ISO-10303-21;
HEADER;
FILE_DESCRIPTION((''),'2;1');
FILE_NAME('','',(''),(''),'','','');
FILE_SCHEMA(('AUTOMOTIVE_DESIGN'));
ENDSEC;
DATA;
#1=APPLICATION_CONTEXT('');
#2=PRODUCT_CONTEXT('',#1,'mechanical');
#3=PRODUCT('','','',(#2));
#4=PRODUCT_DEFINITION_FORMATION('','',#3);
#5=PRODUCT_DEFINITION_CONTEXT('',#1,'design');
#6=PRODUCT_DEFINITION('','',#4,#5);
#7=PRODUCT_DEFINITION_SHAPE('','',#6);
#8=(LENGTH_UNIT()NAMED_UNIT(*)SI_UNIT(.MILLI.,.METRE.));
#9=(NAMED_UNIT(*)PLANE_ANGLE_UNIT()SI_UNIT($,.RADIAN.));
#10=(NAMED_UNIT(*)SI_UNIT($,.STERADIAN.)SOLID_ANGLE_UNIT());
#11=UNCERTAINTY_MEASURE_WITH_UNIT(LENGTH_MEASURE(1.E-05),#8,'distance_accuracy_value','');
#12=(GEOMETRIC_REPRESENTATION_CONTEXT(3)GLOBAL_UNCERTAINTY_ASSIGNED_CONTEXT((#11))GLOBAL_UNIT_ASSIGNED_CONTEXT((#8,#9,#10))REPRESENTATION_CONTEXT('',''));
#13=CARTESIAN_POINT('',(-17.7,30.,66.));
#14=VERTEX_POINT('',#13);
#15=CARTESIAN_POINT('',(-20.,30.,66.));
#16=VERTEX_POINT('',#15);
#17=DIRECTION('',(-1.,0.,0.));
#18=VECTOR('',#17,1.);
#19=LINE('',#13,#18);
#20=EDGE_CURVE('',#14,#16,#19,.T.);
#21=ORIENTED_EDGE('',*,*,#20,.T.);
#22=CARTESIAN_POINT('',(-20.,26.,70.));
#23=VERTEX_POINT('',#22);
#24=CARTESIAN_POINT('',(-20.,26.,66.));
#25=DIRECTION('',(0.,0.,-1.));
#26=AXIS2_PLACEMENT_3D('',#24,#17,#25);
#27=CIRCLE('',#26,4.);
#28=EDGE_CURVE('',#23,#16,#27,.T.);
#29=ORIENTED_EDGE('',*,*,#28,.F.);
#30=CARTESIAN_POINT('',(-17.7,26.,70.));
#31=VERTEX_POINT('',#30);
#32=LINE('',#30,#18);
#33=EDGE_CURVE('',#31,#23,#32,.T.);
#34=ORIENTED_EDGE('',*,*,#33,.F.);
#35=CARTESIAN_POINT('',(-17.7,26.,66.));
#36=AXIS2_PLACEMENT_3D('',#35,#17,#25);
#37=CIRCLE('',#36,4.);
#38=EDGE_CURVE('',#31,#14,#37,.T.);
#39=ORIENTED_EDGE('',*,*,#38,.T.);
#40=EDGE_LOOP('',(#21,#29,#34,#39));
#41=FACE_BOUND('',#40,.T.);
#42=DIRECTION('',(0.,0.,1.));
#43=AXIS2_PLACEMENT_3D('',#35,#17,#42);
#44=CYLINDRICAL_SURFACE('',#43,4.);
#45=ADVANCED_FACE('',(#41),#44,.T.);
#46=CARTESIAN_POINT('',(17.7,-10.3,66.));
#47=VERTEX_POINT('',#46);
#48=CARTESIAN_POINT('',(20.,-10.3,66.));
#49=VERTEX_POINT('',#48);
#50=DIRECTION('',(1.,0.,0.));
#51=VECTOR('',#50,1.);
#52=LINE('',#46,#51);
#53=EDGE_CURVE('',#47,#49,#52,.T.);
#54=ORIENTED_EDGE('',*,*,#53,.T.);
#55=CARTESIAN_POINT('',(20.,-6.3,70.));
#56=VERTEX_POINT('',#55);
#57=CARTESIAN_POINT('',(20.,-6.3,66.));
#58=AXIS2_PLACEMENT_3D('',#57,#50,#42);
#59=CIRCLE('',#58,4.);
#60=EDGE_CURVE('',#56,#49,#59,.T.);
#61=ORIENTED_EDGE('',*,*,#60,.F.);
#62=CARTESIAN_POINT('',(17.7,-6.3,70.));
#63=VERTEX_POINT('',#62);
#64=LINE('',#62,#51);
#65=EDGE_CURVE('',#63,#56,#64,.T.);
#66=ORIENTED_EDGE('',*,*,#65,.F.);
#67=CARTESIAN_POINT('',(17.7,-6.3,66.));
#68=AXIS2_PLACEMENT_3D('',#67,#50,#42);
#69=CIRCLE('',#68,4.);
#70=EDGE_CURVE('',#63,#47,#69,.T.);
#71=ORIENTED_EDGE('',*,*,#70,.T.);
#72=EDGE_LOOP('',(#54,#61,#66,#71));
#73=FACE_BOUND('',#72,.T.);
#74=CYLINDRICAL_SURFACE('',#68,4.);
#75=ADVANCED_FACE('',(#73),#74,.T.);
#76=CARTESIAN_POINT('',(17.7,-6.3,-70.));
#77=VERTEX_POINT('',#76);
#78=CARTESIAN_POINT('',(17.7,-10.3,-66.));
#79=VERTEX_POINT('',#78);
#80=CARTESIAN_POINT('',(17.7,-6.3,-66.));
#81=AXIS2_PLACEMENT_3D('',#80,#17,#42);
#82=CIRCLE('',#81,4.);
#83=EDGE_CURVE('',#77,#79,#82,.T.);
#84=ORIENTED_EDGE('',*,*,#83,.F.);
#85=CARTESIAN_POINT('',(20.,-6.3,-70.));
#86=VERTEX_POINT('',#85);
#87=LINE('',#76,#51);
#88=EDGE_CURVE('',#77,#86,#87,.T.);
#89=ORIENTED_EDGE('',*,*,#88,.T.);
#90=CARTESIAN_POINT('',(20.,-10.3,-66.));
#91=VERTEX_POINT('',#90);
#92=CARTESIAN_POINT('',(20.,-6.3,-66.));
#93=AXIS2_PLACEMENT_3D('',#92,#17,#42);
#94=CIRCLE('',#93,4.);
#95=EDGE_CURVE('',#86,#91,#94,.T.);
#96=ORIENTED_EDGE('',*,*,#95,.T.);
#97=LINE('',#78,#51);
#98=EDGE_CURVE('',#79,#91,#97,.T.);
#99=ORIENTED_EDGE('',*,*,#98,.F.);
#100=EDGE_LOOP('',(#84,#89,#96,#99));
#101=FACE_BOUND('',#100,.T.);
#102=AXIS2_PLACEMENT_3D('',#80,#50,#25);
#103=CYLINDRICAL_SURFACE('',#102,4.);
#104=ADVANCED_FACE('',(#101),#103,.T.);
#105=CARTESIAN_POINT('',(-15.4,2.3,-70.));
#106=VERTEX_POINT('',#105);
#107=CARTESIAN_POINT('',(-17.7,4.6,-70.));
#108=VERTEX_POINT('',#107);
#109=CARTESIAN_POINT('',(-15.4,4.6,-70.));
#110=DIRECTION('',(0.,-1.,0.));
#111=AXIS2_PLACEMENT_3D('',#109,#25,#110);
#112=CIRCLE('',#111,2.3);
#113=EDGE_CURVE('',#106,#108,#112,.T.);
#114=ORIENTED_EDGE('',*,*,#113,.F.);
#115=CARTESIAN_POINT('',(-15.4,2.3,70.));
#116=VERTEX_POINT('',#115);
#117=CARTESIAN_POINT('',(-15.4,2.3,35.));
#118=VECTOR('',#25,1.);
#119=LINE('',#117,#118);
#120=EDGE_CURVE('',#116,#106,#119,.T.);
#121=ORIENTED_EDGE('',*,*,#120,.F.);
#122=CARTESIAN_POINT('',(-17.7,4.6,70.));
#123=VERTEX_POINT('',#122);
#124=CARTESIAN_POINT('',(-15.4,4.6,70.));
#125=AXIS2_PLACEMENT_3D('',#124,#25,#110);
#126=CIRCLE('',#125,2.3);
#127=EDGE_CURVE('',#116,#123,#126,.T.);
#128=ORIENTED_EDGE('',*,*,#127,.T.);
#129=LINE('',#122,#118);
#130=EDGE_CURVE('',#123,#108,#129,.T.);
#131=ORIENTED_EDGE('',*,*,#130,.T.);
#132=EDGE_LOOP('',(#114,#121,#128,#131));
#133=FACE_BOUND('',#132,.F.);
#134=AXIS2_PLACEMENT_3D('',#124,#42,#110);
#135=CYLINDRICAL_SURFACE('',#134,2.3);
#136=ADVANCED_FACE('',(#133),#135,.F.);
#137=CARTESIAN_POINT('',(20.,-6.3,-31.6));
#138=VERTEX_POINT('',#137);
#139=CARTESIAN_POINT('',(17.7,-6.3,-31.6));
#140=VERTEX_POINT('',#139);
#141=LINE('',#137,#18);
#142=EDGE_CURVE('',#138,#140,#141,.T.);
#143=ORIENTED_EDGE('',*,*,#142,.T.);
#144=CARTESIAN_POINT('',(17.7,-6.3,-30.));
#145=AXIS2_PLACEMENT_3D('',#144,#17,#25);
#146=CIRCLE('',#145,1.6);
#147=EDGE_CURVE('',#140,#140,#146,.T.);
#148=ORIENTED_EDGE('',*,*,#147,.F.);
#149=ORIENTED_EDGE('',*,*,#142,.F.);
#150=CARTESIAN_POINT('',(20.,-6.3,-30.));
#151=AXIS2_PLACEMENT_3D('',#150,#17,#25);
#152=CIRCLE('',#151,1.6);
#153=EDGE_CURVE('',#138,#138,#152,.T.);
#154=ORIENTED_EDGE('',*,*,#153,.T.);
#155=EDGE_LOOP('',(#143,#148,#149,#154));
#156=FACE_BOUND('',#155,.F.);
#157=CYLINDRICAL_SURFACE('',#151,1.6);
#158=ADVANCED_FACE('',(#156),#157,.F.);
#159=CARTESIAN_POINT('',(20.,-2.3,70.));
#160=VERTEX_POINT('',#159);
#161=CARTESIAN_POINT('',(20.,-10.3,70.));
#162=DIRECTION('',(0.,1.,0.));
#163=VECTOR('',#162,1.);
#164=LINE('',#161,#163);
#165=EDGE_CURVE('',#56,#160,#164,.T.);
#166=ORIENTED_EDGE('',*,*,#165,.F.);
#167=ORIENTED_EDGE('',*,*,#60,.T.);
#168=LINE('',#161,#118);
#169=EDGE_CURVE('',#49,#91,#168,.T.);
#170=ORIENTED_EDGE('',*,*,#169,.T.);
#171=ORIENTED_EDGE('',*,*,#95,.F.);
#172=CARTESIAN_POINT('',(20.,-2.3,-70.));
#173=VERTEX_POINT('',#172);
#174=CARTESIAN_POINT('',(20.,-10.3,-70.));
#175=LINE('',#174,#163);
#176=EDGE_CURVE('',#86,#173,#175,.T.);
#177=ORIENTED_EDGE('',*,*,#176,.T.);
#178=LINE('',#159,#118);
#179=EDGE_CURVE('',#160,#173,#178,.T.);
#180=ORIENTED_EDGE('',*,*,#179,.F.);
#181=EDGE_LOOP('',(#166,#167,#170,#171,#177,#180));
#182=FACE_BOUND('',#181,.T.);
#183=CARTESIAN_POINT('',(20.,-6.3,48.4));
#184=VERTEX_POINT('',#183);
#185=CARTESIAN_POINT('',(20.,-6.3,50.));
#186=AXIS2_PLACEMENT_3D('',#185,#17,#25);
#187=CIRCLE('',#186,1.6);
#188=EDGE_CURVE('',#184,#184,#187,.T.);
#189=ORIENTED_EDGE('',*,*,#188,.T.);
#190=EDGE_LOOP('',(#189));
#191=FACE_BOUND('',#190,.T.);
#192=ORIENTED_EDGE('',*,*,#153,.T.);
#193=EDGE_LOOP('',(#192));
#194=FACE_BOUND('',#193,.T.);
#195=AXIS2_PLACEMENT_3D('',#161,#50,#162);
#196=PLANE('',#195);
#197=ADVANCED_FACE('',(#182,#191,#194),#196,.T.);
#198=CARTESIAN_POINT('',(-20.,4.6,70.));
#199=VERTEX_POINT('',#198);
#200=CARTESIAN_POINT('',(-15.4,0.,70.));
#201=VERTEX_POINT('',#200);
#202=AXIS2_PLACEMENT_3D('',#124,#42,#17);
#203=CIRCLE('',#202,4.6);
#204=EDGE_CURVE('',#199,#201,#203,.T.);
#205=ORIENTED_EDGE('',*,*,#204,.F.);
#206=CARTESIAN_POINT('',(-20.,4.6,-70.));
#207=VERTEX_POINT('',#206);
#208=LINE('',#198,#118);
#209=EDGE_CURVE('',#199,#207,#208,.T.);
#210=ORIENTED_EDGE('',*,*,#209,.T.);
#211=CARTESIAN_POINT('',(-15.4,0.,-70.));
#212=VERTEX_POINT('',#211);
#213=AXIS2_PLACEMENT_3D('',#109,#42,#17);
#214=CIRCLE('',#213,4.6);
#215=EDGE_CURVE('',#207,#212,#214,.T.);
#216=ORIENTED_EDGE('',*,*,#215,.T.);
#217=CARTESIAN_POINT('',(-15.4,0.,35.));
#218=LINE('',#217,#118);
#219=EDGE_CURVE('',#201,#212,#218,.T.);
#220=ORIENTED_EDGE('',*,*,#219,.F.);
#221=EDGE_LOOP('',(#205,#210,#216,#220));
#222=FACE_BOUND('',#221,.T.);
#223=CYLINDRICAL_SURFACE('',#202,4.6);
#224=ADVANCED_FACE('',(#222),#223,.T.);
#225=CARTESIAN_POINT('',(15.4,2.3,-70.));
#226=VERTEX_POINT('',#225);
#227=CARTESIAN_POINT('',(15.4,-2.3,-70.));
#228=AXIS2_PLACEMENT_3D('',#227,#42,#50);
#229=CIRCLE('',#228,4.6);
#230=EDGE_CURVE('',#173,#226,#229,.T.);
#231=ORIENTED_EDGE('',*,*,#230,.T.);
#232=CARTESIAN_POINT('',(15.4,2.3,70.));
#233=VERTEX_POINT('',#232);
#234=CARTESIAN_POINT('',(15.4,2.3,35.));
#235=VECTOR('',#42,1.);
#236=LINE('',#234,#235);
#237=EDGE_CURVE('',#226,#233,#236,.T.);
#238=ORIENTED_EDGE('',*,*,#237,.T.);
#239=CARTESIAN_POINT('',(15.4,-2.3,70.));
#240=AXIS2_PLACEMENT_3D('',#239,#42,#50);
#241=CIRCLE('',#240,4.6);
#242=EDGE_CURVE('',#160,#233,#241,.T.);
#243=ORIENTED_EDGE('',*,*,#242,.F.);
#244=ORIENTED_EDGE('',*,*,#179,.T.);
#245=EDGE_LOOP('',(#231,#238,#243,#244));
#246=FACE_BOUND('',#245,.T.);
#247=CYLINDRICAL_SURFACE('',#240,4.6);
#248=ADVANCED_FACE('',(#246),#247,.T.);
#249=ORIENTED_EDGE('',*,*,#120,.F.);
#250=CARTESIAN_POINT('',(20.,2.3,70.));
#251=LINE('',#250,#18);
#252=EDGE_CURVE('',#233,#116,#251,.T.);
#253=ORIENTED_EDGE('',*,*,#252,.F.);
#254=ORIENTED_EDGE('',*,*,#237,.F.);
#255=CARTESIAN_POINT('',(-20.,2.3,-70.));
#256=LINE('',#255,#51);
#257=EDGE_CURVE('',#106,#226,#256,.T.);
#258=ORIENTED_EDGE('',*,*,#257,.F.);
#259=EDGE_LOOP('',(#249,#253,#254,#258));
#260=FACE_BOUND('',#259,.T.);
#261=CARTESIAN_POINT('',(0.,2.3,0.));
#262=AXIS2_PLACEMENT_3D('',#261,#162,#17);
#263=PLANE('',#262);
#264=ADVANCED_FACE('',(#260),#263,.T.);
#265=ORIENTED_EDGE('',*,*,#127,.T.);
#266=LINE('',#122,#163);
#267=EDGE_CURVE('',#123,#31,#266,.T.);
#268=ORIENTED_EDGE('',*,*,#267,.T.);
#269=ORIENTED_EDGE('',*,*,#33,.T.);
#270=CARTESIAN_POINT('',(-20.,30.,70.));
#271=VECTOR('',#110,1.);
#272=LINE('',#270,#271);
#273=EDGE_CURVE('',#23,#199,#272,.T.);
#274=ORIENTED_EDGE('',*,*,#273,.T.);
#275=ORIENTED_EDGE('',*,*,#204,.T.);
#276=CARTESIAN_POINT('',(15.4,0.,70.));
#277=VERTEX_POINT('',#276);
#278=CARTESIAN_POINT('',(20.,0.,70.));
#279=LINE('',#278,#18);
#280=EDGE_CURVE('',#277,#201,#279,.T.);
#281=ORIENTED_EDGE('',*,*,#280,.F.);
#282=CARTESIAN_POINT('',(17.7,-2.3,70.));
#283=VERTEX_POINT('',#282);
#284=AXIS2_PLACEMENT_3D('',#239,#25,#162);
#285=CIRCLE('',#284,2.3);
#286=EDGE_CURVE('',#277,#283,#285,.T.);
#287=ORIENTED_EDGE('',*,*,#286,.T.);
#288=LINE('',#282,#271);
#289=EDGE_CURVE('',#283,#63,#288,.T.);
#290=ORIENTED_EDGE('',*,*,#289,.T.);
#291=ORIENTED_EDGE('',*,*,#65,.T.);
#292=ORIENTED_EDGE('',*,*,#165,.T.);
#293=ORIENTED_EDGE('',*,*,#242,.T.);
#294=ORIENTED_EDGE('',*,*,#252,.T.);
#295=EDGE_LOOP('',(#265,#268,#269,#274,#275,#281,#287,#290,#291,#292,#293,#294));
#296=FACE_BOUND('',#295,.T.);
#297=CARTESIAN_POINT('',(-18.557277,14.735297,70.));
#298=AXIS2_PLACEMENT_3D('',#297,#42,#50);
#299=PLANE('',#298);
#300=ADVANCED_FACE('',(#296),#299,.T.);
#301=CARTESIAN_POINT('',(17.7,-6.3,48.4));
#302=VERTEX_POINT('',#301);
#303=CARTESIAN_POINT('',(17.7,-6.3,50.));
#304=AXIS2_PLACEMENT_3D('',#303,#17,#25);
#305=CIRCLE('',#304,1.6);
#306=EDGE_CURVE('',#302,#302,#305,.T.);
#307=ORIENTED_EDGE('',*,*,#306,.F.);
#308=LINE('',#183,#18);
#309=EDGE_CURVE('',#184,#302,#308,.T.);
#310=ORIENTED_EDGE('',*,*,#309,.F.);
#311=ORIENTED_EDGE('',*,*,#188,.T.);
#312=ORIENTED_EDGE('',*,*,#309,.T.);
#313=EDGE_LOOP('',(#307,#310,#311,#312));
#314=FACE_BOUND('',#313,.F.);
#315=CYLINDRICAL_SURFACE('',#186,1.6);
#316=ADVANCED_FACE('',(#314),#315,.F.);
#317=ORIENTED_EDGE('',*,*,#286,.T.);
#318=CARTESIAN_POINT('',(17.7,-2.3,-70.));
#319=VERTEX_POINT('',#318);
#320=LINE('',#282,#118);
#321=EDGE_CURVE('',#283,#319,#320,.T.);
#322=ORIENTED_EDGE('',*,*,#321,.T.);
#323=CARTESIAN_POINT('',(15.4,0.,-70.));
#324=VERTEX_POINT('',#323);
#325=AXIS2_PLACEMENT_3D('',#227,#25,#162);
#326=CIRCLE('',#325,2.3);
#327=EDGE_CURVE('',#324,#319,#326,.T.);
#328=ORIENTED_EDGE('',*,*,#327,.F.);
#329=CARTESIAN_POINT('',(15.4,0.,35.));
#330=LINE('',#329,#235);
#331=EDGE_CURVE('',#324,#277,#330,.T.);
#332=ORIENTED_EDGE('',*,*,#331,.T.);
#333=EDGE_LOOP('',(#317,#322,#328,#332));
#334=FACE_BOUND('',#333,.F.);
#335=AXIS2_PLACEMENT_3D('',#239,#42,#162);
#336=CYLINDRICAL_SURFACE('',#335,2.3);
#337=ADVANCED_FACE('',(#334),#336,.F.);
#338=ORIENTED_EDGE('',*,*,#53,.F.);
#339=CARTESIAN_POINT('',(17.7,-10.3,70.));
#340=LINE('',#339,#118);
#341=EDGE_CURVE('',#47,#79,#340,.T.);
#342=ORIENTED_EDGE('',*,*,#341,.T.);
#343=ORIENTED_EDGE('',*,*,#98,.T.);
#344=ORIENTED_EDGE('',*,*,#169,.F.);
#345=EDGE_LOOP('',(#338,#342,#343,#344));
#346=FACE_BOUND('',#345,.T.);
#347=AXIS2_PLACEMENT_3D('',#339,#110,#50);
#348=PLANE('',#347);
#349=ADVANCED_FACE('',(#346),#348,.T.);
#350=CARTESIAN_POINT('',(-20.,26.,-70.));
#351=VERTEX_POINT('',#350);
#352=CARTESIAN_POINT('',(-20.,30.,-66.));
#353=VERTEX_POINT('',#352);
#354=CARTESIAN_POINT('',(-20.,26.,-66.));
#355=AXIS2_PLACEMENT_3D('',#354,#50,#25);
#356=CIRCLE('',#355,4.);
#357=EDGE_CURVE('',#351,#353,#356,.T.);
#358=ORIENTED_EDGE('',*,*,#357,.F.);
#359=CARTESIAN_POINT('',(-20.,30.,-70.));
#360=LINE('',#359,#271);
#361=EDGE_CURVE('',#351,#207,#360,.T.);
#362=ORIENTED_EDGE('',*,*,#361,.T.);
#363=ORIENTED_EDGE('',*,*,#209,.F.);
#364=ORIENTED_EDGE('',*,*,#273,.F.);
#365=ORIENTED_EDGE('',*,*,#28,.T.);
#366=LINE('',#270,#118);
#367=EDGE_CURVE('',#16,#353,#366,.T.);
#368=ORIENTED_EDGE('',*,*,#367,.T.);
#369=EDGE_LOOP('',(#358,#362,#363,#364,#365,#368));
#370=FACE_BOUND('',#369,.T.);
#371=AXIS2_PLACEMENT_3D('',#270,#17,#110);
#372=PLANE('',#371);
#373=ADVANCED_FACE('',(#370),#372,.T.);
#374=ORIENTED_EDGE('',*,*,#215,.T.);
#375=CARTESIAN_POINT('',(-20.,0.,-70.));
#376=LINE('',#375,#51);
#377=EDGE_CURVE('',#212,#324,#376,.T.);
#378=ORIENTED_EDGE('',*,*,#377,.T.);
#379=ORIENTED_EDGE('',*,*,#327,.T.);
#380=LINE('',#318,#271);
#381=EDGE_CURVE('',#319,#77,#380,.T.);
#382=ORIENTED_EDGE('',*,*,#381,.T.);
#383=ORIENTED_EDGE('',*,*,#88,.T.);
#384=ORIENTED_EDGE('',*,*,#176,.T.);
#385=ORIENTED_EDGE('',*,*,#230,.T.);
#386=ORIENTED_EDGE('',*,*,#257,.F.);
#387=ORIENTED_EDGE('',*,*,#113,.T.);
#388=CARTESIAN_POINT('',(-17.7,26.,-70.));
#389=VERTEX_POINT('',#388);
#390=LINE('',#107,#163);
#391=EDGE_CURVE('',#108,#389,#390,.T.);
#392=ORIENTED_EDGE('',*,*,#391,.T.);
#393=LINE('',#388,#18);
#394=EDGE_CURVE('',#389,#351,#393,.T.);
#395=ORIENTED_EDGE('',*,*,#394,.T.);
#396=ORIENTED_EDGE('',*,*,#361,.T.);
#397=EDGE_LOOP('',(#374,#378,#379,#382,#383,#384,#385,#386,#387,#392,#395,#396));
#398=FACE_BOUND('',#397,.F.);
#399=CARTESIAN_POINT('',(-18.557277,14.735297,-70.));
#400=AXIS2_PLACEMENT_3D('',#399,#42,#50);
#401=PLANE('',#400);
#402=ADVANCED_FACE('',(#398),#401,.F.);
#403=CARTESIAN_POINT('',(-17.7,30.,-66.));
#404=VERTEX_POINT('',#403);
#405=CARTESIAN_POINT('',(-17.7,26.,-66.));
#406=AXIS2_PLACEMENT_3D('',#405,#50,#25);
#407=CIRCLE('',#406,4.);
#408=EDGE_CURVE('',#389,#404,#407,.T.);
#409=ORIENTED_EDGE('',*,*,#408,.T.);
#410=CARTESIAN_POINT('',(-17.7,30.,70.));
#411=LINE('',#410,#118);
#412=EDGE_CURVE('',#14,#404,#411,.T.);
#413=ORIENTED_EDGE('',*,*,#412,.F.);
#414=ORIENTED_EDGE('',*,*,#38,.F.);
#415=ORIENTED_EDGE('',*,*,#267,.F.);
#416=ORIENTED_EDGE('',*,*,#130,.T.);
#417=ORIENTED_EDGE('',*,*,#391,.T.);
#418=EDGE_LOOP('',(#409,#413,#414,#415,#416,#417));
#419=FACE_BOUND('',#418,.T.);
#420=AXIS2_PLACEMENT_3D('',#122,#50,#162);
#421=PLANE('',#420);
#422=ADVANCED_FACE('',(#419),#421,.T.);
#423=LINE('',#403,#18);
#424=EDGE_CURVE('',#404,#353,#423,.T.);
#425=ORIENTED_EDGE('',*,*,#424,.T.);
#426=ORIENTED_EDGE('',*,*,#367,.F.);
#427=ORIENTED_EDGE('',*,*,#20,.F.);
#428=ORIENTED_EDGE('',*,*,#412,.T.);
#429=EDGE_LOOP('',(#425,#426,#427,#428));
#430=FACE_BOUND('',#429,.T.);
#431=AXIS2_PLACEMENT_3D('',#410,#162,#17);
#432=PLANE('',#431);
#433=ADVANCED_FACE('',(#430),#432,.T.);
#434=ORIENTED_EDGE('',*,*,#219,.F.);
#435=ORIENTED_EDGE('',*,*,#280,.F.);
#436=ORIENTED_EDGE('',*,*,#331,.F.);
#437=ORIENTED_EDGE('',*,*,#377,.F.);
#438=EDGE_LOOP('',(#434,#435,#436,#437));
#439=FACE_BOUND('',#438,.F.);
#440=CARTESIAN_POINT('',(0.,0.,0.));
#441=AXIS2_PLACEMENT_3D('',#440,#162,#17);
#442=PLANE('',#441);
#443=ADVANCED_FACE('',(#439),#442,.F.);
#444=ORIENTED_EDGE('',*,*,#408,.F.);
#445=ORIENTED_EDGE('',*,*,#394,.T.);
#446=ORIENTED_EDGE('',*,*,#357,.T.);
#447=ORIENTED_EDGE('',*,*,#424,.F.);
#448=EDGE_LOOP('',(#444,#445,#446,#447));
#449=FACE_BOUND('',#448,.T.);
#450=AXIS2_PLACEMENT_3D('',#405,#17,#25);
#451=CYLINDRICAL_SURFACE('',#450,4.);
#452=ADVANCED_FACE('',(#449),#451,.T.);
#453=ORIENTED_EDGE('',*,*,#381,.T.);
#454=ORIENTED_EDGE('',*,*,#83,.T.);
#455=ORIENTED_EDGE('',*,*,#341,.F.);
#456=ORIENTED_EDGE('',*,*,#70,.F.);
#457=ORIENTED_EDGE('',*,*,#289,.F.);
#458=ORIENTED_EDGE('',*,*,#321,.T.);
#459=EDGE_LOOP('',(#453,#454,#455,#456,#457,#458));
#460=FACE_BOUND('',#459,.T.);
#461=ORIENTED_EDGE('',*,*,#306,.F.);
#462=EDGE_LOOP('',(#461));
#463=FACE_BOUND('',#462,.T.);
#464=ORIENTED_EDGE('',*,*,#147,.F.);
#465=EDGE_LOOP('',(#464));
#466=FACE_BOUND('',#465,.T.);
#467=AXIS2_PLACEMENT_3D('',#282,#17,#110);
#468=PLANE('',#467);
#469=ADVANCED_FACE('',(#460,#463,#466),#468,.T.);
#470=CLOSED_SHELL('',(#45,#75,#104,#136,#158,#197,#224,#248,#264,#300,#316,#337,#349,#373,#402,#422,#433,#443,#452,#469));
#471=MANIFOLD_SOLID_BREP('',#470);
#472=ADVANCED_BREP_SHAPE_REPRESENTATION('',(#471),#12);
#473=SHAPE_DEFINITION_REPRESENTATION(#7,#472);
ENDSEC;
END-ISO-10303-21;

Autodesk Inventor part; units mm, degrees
ref_plane "YZ Plane" through (0, 0, 0) normal (1, 0, 0) x (0, 1, 0)
ref_plane "XZ Plane" through (0, 0, 0) normal (0, 1, 0) x (-1, 0, 0)
ref_plane "XY Plane" through (0, 0, 0) normal (0, 0, 1) x (1, 0, 0)
sketch "スケッチ1" plane through (0, 0, 0) normal (0, 1, 0) x (-1, 0, 0)
  line L0 (-20, 70) -> (20, 70)
  line L1 (20, 70) -> (20, -70)
  line L2 (20, -70) -> (-20, -70)
  line L3 (-20, -70) -> (-20, 70)
  line L4 (-20, 70) -> (20, -70) construction
  line L5 (20, 70) -> (-20, -70) construction
  point P0 (0, 0)
  dimension "d0" = 140
  dimension "d1" = 40
extrude "プレート1" add sketch "スケッチ1" along normal blind 2.3
sketch "スケッチ2" plane through (17.7, 2.3, 70) normal (1, 0, 0) x (0, 1, 0)
  line L0 (0, -140) -> (0, 0)
  line L1 (0, 0) -> (-12.6, 0)
  line L2 (-12.6, 0) -> (-12.6, -140)
  line L3 (-12.6, -140) -> (0, -140)
edge flange "フランジ1" height 12.6 angle 90 thickness 2.3 bend radius 2.3 thickness toward (1, 0, 0) relief tear relief width 2.3 relief depth 1.15 edges at (20, 0, 0) wall of the first edge with corners at (17.7, 2.3, -70) (17.7, 2.3, 70) (17.7, -10.3, 70) (17.7, -10.3, -70)
bend "曲げ1"
corner "コーナー1"
sketch "スケッチ3" plane through (-17.7, 0, 70) normal (-1, 0, 0) x (0, -1, 0)
  line L0 (0, -140) -> (0, 0)
  line L1 (0, 0) -> (-30, 0)
  line L2 (-30, 0) -> (-30, -140)
  line L3 (-30, -140) -> (0, -140)
edge flange "フランジ2" height 30 angle 90 thickness 2.3 bend radius 2.3 thickness toward (-1, 0, 0) relief tear relief width 2.3 relief depth 1.15 edges at (-20, 2.3, 0) wall of the first edge with corners at (-17.7, 0, -70) (-17.7, 0, 70) (-17.7, 30, 70) (-17.7, 30, -70)
bend "曲げ2"
corner "コーナー2"
sketch "スケッチ4" plane through (20, -10.3, 70) normal (1, 0, 0) x (0, 0, -1)
  line L0 (140, 0) -> (0, 0) projected
  line L1 (0, 0) -> (0, 8) projected
  point P0 (70, 10.3)
  point P1 (20, 4)
  point P2 (100, 4)
  dimension "d23" = 4
  dimension "d24" = 80
  dimension "d25" = 20
hole "穴1" at (20, -6.3, 50) at (20, -6.3, -30) direction (-1, 0, 0) diameter 3.2 depth 2.3 tip angle 118 clearance for "Flat Head Machine Screw" size "M3" standard "Ansi Metric M Profile"
fillet "コーナーR1" radius 4 4 edges at (18.85, -10.3, 70) (18.85, -10.3, -70) (-18.85, 30, -70) (-18.85, 30, 70)
equation "\"d31\" = Thickness"
equation "\"d2\" = Thickness"
equation "\"d3\" = BendReliefWidth"
equation "\"d4\" = BendReliefDepth"
equation "\"d5\" = MinimumRemnant"
equation "\"d6\" = TransitionRadius"
equation "\"d9\" = BendRadius"
equation "\"d10\" = CornerReliefSize"
equation "\"d11\" = GapSize"
equation "\"d12\" = JacobiRadiusSize"
equation "\"d13\" = BendReliefWidth"
equation "\"d14\" = BendReliefDepth"
equation "\"d15\" = MinimumRemnant"
equation "\"d16\" = TransitionRadius"
equation "\"d19\" = BendRadius"
equation "\"d20\" = CornerReliefSize"
equation "\"d21\" = GapSize"
equation "\"d22\" = JacobiRadiusSize"
equation "\"BendRadius\" = Thickness"
equation "\"BendReliefWidth\" = Thickness"
equation "\"BendReliefDepth\" = 0.5 * Thickness"
equation "\"CornerReliefSize\" = 4 * Thickness"
equation "\"MinimumRemnant\" = 2 * Thickness"
equation "\"TransitionRadius\" = BendRadius"
equation "\"JacobiRadiusSize\" = BendRadius"
equation "\"GapSize\" = Thickness"
equation "\"Thickness\" = 2.3"
properties part number "plate7" material "鋼、炭素鋼"
